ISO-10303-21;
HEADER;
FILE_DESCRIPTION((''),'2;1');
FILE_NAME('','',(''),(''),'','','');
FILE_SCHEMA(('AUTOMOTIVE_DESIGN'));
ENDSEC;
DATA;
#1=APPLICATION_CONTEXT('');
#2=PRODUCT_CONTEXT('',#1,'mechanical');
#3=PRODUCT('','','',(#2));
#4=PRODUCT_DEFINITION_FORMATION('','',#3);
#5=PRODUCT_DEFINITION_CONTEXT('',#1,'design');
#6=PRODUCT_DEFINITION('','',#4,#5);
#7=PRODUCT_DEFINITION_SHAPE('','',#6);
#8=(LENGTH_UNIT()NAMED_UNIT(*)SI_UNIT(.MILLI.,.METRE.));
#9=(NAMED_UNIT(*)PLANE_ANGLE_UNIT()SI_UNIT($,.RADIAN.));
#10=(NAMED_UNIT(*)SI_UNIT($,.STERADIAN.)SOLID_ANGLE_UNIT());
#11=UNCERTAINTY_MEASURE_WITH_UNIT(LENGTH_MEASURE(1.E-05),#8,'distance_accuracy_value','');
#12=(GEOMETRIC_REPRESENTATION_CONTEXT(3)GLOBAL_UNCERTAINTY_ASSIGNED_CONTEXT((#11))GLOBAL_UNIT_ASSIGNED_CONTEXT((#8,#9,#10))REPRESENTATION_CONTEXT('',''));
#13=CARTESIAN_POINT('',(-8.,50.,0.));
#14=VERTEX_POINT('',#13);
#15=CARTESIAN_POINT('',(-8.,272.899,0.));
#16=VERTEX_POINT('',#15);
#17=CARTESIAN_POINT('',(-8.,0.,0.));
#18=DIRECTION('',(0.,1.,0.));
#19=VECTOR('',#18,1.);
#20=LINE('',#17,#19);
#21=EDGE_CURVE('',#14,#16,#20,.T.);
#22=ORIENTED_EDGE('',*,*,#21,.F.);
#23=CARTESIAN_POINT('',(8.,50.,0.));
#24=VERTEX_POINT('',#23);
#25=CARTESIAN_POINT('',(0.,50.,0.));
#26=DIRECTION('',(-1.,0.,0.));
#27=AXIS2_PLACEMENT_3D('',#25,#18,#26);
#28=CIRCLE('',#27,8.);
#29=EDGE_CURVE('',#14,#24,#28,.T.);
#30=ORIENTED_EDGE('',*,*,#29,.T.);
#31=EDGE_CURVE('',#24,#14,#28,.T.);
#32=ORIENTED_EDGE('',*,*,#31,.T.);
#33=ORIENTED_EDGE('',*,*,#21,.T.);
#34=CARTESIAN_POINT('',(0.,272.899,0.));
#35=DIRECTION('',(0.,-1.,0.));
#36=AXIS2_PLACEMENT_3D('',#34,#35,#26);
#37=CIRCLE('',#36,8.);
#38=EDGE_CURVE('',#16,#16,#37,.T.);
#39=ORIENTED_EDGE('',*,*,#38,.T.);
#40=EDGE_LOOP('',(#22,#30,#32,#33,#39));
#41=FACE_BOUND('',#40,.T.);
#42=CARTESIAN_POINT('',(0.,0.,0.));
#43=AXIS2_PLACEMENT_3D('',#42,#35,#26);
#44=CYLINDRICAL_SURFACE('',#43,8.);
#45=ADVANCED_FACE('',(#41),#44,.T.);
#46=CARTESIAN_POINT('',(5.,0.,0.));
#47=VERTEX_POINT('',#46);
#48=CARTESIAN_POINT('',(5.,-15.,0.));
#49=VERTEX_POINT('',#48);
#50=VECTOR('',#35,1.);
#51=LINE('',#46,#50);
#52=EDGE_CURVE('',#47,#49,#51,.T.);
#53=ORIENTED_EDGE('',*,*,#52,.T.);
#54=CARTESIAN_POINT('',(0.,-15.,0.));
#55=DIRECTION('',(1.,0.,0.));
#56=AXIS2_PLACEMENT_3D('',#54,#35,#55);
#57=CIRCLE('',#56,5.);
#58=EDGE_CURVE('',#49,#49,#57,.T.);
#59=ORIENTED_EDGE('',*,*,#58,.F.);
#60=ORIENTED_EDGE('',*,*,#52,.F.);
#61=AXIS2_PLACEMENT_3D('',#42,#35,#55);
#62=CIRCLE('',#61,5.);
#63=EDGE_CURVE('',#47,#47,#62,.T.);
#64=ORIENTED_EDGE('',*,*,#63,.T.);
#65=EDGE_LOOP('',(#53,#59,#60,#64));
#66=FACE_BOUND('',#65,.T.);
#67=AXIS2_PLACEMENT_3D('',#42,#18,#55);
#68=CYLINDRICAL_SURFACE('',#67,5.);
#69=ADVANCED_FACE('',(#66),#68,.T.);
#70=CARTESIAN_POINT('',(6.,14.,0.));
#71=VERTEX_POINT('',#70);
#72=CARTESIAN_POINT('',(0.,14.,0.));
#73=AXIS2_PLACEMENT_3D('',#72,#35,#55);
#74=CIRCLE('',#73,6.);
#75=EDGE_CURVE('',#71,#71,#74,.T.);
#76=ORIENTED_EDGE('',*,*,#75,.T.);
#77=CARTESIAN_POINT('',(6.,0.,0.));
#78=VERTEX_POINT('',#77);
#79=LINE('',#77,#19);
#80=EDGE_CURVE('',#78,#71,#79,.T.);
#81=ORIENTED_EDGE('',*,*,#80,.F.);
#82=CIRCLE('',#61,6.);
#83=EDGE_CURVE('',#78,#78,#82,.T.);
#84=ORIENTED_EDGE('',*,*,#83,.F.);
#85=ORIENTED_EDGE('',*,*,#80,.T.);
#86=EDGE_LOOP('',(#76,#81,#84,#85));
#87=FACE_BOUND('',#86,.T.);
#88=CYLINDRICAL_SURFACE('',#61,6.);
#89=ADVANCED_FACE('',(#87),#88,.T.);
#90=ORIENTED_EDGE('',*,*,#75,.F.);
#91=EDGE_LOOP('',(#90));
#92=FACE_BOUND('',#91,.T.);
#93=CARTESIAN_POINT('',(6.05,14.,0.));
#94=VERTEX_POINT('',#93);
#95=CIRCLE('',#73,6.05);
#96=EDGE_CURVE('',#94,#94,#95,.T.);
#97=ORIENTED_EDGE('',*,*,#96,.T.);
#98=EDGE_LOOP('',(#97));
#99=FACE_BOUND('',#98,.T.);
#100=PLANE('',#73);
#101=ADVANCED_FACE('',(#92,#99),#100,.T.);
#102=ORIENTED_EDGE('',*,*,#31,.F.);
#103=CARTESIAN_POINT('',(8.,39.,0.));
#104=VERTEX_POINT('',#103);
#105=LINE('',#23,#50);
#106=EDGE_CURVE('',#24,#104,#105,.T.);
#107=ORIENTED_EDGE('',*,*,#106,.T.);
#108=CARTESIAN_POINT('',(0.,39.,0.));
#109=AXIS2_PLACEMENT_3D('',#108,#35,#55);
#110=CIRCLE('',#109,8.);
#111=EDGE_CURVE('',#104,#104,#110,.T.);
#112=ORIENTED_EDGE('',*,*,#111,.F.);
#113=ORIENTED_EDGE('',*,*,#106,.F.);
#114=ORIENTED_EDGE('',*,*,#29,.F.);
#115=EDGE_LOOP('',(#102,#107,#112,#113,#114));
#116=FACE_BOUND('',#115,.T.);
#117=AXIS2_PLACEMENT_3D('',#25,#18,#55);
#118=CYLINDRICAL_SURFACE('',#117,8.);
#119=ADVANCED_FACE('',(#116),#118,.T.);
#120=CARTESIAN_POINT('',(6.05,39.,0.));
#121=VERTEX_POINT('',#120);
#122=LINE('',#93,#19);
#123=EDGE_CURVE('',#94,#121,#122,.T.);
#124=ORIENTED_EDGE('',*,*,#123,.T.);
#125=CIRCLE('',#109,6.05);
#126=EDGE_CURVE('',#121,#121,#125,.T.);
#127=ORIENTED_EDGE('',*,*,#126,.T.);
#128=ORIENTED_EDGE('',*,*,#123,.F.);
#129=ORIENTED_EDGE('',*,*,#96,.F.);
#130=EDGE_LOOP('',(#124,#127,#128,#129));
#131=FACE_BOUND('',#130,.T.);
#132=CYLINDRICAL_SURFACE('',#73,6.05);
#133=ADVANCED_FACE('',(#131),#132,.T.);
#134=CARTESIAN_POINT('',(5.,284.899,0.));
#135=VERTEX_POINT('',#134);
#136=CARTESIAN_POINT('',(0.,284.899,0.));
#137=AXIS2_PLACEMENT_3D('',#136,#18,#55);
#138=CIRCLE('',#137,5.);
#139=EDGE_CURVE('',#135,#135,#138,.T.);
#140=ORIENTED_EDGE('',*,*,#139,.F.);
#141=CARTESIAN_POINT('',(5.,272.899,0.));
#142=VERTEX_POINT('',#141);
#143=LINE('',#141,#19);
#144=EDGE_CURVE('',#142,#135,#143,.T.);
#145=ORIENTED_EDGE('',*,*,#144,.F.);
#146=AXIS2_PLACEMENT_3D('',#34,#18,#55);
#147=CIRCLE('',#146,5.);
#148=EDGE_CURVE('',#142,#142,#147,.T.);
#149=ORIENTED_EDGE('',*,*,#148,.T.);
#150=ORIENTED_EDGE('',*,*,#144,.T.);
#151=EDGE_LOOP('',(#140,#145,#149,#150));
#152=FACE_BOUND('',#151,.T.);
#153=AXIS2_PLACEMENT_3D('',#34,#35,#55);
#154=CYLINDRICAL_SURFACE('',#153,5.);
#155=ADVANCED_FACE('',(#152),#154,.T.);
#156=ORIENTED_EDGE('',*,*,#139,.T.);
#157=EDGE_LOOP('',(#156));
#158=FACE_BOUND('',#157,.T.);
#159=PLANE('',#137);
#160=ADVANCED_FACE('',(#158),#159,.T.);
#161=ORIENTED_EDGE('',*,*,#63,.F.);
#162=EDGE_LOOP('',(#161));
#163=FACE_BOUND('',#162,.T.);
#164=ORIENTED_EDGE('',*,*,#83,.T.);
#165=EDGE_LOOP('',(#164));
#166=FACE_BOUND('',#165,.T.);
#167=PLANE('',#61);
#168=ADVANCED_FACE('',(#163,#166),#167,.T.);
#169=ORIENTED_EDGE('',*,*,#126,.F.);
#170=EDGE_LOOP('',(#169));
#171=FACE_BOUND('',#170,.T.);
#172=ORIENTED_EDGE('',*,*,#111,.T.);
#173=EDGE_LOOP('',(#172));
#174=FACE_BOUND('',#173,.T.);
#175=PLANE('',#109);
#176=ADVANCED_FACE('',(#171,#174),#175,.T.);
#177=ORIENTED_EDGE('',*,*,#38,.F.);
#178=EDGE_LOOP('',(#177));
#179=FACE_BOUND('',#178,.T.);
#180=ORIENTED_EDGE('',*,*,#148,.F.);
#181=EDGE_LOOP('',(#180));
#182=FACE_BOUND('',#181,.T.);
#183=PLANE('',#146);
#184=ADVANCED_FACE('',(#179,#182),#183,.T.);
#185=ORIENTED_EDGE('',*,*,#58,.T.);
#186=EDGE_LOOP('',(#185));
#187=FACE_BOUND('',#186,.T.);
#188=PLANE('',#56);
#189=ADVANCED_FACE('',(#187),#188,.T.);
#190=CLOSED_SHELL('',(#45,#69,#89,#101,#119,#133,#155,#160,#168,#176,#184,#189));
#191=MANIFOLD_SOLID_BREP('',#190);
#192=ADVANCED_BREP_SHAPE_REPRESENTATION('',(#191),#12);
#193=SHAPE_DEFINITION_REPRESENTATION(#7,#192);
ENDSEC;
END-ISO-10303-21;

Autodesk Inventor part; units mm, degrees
ref_plane "YZ Plane" through (0, 0, 0) normal (1, 0, 0) x (0, 1, 0)
ref_plane "XZ Plane" through (0, 0, 0) normal (0, 1, 0) x (-1, 0, 0)
ref_plane "XY Plane" through (0, 0, 0) normal (0, 0, 1) x (1, 0, 0)
sketch "Sketch1" plane through (0, 0, 0) normal (0, 1, 0) x (-1, 0, 0)
  circle A0 centre (0, 0) radius 8
  dimension "d0" = 16
extrude "Extrusion1" add sketch "Sketch1" along normal blind 300
sketch "Sketch2" plane through (0, 0, 0) normal (0, -1, 0) x (1, 0, 0)
  circle A0 centre (0, 0) radius 8 projected
extrude "Extrusion2" cut sketch "Sketch2" against normal blind 50
sketch "Sketch3" plane through (0, 50, 0) normal (0, -1, 0) x (1, 0, 0)
  circle A0 centre (0, 0) radius 8 projected
extrude "Extrusion3" add sketch "Sketch3" along normal blind 50
sketch "Sketch4" plane through (0, 0, 0) normal (0, -1, 0) x (1, 0, 0)
  circle A0 centre (0, 0) radius 8 projected
  circle A1 centre (0, 0) radius 6
  dimension "d7" = 12
extrude "Extrusion4" cut sketch "Sketch4" against normal blind 14
thread "Thread1" size "M12x1" class "6g" standard "ANSI Metric M Profile" full length
sketch "Sketch6" plane through (0, 14, 0) normal (0, -1, 0) x (1, 0, 0)
  circle A0 centre (0, 0) radius 8 projected
  circle A1 centre (0, 0) radius 6.05
  dimension "d13" = 12.1
extrude "Extrusion5" cut sketch "Sketch6" against normal blind 25
sketch "Sketch7" plane through (0, 0, 0) normal (0, -1, 0) x (1, 0, 0)
  circle A0 centre (0, 0) radius 6 projected
  circle A1 centre (0, 0) radius 5
  dimension "d16" = 10
extrude "Extrusion6" add sketch "Sketch7" along normal blind 15 contours A1
sketch "Sketch8" plane through (0, 300, 0) normal (0, 1, 0) x (1, 0, 0)
  circle A0 centre (0, 0) radius 8 projected
extrude "Extrusion7" cut sketch "Sketch8" against normal blind 27.101
sketch "Sketch9" plane through (0, 272.899, 0) normal (0, 1, 0) x (1, 0, 0)
  circle A0 centre (0, 0) radius 8 projected
  circle A1 centre (0, 0) radius 5
  dimension "d21" = 10
extrude "Extrusion8" add sketch "Sketch9" along normal blind 12 contours A1
properties part number "1605_300mm"
